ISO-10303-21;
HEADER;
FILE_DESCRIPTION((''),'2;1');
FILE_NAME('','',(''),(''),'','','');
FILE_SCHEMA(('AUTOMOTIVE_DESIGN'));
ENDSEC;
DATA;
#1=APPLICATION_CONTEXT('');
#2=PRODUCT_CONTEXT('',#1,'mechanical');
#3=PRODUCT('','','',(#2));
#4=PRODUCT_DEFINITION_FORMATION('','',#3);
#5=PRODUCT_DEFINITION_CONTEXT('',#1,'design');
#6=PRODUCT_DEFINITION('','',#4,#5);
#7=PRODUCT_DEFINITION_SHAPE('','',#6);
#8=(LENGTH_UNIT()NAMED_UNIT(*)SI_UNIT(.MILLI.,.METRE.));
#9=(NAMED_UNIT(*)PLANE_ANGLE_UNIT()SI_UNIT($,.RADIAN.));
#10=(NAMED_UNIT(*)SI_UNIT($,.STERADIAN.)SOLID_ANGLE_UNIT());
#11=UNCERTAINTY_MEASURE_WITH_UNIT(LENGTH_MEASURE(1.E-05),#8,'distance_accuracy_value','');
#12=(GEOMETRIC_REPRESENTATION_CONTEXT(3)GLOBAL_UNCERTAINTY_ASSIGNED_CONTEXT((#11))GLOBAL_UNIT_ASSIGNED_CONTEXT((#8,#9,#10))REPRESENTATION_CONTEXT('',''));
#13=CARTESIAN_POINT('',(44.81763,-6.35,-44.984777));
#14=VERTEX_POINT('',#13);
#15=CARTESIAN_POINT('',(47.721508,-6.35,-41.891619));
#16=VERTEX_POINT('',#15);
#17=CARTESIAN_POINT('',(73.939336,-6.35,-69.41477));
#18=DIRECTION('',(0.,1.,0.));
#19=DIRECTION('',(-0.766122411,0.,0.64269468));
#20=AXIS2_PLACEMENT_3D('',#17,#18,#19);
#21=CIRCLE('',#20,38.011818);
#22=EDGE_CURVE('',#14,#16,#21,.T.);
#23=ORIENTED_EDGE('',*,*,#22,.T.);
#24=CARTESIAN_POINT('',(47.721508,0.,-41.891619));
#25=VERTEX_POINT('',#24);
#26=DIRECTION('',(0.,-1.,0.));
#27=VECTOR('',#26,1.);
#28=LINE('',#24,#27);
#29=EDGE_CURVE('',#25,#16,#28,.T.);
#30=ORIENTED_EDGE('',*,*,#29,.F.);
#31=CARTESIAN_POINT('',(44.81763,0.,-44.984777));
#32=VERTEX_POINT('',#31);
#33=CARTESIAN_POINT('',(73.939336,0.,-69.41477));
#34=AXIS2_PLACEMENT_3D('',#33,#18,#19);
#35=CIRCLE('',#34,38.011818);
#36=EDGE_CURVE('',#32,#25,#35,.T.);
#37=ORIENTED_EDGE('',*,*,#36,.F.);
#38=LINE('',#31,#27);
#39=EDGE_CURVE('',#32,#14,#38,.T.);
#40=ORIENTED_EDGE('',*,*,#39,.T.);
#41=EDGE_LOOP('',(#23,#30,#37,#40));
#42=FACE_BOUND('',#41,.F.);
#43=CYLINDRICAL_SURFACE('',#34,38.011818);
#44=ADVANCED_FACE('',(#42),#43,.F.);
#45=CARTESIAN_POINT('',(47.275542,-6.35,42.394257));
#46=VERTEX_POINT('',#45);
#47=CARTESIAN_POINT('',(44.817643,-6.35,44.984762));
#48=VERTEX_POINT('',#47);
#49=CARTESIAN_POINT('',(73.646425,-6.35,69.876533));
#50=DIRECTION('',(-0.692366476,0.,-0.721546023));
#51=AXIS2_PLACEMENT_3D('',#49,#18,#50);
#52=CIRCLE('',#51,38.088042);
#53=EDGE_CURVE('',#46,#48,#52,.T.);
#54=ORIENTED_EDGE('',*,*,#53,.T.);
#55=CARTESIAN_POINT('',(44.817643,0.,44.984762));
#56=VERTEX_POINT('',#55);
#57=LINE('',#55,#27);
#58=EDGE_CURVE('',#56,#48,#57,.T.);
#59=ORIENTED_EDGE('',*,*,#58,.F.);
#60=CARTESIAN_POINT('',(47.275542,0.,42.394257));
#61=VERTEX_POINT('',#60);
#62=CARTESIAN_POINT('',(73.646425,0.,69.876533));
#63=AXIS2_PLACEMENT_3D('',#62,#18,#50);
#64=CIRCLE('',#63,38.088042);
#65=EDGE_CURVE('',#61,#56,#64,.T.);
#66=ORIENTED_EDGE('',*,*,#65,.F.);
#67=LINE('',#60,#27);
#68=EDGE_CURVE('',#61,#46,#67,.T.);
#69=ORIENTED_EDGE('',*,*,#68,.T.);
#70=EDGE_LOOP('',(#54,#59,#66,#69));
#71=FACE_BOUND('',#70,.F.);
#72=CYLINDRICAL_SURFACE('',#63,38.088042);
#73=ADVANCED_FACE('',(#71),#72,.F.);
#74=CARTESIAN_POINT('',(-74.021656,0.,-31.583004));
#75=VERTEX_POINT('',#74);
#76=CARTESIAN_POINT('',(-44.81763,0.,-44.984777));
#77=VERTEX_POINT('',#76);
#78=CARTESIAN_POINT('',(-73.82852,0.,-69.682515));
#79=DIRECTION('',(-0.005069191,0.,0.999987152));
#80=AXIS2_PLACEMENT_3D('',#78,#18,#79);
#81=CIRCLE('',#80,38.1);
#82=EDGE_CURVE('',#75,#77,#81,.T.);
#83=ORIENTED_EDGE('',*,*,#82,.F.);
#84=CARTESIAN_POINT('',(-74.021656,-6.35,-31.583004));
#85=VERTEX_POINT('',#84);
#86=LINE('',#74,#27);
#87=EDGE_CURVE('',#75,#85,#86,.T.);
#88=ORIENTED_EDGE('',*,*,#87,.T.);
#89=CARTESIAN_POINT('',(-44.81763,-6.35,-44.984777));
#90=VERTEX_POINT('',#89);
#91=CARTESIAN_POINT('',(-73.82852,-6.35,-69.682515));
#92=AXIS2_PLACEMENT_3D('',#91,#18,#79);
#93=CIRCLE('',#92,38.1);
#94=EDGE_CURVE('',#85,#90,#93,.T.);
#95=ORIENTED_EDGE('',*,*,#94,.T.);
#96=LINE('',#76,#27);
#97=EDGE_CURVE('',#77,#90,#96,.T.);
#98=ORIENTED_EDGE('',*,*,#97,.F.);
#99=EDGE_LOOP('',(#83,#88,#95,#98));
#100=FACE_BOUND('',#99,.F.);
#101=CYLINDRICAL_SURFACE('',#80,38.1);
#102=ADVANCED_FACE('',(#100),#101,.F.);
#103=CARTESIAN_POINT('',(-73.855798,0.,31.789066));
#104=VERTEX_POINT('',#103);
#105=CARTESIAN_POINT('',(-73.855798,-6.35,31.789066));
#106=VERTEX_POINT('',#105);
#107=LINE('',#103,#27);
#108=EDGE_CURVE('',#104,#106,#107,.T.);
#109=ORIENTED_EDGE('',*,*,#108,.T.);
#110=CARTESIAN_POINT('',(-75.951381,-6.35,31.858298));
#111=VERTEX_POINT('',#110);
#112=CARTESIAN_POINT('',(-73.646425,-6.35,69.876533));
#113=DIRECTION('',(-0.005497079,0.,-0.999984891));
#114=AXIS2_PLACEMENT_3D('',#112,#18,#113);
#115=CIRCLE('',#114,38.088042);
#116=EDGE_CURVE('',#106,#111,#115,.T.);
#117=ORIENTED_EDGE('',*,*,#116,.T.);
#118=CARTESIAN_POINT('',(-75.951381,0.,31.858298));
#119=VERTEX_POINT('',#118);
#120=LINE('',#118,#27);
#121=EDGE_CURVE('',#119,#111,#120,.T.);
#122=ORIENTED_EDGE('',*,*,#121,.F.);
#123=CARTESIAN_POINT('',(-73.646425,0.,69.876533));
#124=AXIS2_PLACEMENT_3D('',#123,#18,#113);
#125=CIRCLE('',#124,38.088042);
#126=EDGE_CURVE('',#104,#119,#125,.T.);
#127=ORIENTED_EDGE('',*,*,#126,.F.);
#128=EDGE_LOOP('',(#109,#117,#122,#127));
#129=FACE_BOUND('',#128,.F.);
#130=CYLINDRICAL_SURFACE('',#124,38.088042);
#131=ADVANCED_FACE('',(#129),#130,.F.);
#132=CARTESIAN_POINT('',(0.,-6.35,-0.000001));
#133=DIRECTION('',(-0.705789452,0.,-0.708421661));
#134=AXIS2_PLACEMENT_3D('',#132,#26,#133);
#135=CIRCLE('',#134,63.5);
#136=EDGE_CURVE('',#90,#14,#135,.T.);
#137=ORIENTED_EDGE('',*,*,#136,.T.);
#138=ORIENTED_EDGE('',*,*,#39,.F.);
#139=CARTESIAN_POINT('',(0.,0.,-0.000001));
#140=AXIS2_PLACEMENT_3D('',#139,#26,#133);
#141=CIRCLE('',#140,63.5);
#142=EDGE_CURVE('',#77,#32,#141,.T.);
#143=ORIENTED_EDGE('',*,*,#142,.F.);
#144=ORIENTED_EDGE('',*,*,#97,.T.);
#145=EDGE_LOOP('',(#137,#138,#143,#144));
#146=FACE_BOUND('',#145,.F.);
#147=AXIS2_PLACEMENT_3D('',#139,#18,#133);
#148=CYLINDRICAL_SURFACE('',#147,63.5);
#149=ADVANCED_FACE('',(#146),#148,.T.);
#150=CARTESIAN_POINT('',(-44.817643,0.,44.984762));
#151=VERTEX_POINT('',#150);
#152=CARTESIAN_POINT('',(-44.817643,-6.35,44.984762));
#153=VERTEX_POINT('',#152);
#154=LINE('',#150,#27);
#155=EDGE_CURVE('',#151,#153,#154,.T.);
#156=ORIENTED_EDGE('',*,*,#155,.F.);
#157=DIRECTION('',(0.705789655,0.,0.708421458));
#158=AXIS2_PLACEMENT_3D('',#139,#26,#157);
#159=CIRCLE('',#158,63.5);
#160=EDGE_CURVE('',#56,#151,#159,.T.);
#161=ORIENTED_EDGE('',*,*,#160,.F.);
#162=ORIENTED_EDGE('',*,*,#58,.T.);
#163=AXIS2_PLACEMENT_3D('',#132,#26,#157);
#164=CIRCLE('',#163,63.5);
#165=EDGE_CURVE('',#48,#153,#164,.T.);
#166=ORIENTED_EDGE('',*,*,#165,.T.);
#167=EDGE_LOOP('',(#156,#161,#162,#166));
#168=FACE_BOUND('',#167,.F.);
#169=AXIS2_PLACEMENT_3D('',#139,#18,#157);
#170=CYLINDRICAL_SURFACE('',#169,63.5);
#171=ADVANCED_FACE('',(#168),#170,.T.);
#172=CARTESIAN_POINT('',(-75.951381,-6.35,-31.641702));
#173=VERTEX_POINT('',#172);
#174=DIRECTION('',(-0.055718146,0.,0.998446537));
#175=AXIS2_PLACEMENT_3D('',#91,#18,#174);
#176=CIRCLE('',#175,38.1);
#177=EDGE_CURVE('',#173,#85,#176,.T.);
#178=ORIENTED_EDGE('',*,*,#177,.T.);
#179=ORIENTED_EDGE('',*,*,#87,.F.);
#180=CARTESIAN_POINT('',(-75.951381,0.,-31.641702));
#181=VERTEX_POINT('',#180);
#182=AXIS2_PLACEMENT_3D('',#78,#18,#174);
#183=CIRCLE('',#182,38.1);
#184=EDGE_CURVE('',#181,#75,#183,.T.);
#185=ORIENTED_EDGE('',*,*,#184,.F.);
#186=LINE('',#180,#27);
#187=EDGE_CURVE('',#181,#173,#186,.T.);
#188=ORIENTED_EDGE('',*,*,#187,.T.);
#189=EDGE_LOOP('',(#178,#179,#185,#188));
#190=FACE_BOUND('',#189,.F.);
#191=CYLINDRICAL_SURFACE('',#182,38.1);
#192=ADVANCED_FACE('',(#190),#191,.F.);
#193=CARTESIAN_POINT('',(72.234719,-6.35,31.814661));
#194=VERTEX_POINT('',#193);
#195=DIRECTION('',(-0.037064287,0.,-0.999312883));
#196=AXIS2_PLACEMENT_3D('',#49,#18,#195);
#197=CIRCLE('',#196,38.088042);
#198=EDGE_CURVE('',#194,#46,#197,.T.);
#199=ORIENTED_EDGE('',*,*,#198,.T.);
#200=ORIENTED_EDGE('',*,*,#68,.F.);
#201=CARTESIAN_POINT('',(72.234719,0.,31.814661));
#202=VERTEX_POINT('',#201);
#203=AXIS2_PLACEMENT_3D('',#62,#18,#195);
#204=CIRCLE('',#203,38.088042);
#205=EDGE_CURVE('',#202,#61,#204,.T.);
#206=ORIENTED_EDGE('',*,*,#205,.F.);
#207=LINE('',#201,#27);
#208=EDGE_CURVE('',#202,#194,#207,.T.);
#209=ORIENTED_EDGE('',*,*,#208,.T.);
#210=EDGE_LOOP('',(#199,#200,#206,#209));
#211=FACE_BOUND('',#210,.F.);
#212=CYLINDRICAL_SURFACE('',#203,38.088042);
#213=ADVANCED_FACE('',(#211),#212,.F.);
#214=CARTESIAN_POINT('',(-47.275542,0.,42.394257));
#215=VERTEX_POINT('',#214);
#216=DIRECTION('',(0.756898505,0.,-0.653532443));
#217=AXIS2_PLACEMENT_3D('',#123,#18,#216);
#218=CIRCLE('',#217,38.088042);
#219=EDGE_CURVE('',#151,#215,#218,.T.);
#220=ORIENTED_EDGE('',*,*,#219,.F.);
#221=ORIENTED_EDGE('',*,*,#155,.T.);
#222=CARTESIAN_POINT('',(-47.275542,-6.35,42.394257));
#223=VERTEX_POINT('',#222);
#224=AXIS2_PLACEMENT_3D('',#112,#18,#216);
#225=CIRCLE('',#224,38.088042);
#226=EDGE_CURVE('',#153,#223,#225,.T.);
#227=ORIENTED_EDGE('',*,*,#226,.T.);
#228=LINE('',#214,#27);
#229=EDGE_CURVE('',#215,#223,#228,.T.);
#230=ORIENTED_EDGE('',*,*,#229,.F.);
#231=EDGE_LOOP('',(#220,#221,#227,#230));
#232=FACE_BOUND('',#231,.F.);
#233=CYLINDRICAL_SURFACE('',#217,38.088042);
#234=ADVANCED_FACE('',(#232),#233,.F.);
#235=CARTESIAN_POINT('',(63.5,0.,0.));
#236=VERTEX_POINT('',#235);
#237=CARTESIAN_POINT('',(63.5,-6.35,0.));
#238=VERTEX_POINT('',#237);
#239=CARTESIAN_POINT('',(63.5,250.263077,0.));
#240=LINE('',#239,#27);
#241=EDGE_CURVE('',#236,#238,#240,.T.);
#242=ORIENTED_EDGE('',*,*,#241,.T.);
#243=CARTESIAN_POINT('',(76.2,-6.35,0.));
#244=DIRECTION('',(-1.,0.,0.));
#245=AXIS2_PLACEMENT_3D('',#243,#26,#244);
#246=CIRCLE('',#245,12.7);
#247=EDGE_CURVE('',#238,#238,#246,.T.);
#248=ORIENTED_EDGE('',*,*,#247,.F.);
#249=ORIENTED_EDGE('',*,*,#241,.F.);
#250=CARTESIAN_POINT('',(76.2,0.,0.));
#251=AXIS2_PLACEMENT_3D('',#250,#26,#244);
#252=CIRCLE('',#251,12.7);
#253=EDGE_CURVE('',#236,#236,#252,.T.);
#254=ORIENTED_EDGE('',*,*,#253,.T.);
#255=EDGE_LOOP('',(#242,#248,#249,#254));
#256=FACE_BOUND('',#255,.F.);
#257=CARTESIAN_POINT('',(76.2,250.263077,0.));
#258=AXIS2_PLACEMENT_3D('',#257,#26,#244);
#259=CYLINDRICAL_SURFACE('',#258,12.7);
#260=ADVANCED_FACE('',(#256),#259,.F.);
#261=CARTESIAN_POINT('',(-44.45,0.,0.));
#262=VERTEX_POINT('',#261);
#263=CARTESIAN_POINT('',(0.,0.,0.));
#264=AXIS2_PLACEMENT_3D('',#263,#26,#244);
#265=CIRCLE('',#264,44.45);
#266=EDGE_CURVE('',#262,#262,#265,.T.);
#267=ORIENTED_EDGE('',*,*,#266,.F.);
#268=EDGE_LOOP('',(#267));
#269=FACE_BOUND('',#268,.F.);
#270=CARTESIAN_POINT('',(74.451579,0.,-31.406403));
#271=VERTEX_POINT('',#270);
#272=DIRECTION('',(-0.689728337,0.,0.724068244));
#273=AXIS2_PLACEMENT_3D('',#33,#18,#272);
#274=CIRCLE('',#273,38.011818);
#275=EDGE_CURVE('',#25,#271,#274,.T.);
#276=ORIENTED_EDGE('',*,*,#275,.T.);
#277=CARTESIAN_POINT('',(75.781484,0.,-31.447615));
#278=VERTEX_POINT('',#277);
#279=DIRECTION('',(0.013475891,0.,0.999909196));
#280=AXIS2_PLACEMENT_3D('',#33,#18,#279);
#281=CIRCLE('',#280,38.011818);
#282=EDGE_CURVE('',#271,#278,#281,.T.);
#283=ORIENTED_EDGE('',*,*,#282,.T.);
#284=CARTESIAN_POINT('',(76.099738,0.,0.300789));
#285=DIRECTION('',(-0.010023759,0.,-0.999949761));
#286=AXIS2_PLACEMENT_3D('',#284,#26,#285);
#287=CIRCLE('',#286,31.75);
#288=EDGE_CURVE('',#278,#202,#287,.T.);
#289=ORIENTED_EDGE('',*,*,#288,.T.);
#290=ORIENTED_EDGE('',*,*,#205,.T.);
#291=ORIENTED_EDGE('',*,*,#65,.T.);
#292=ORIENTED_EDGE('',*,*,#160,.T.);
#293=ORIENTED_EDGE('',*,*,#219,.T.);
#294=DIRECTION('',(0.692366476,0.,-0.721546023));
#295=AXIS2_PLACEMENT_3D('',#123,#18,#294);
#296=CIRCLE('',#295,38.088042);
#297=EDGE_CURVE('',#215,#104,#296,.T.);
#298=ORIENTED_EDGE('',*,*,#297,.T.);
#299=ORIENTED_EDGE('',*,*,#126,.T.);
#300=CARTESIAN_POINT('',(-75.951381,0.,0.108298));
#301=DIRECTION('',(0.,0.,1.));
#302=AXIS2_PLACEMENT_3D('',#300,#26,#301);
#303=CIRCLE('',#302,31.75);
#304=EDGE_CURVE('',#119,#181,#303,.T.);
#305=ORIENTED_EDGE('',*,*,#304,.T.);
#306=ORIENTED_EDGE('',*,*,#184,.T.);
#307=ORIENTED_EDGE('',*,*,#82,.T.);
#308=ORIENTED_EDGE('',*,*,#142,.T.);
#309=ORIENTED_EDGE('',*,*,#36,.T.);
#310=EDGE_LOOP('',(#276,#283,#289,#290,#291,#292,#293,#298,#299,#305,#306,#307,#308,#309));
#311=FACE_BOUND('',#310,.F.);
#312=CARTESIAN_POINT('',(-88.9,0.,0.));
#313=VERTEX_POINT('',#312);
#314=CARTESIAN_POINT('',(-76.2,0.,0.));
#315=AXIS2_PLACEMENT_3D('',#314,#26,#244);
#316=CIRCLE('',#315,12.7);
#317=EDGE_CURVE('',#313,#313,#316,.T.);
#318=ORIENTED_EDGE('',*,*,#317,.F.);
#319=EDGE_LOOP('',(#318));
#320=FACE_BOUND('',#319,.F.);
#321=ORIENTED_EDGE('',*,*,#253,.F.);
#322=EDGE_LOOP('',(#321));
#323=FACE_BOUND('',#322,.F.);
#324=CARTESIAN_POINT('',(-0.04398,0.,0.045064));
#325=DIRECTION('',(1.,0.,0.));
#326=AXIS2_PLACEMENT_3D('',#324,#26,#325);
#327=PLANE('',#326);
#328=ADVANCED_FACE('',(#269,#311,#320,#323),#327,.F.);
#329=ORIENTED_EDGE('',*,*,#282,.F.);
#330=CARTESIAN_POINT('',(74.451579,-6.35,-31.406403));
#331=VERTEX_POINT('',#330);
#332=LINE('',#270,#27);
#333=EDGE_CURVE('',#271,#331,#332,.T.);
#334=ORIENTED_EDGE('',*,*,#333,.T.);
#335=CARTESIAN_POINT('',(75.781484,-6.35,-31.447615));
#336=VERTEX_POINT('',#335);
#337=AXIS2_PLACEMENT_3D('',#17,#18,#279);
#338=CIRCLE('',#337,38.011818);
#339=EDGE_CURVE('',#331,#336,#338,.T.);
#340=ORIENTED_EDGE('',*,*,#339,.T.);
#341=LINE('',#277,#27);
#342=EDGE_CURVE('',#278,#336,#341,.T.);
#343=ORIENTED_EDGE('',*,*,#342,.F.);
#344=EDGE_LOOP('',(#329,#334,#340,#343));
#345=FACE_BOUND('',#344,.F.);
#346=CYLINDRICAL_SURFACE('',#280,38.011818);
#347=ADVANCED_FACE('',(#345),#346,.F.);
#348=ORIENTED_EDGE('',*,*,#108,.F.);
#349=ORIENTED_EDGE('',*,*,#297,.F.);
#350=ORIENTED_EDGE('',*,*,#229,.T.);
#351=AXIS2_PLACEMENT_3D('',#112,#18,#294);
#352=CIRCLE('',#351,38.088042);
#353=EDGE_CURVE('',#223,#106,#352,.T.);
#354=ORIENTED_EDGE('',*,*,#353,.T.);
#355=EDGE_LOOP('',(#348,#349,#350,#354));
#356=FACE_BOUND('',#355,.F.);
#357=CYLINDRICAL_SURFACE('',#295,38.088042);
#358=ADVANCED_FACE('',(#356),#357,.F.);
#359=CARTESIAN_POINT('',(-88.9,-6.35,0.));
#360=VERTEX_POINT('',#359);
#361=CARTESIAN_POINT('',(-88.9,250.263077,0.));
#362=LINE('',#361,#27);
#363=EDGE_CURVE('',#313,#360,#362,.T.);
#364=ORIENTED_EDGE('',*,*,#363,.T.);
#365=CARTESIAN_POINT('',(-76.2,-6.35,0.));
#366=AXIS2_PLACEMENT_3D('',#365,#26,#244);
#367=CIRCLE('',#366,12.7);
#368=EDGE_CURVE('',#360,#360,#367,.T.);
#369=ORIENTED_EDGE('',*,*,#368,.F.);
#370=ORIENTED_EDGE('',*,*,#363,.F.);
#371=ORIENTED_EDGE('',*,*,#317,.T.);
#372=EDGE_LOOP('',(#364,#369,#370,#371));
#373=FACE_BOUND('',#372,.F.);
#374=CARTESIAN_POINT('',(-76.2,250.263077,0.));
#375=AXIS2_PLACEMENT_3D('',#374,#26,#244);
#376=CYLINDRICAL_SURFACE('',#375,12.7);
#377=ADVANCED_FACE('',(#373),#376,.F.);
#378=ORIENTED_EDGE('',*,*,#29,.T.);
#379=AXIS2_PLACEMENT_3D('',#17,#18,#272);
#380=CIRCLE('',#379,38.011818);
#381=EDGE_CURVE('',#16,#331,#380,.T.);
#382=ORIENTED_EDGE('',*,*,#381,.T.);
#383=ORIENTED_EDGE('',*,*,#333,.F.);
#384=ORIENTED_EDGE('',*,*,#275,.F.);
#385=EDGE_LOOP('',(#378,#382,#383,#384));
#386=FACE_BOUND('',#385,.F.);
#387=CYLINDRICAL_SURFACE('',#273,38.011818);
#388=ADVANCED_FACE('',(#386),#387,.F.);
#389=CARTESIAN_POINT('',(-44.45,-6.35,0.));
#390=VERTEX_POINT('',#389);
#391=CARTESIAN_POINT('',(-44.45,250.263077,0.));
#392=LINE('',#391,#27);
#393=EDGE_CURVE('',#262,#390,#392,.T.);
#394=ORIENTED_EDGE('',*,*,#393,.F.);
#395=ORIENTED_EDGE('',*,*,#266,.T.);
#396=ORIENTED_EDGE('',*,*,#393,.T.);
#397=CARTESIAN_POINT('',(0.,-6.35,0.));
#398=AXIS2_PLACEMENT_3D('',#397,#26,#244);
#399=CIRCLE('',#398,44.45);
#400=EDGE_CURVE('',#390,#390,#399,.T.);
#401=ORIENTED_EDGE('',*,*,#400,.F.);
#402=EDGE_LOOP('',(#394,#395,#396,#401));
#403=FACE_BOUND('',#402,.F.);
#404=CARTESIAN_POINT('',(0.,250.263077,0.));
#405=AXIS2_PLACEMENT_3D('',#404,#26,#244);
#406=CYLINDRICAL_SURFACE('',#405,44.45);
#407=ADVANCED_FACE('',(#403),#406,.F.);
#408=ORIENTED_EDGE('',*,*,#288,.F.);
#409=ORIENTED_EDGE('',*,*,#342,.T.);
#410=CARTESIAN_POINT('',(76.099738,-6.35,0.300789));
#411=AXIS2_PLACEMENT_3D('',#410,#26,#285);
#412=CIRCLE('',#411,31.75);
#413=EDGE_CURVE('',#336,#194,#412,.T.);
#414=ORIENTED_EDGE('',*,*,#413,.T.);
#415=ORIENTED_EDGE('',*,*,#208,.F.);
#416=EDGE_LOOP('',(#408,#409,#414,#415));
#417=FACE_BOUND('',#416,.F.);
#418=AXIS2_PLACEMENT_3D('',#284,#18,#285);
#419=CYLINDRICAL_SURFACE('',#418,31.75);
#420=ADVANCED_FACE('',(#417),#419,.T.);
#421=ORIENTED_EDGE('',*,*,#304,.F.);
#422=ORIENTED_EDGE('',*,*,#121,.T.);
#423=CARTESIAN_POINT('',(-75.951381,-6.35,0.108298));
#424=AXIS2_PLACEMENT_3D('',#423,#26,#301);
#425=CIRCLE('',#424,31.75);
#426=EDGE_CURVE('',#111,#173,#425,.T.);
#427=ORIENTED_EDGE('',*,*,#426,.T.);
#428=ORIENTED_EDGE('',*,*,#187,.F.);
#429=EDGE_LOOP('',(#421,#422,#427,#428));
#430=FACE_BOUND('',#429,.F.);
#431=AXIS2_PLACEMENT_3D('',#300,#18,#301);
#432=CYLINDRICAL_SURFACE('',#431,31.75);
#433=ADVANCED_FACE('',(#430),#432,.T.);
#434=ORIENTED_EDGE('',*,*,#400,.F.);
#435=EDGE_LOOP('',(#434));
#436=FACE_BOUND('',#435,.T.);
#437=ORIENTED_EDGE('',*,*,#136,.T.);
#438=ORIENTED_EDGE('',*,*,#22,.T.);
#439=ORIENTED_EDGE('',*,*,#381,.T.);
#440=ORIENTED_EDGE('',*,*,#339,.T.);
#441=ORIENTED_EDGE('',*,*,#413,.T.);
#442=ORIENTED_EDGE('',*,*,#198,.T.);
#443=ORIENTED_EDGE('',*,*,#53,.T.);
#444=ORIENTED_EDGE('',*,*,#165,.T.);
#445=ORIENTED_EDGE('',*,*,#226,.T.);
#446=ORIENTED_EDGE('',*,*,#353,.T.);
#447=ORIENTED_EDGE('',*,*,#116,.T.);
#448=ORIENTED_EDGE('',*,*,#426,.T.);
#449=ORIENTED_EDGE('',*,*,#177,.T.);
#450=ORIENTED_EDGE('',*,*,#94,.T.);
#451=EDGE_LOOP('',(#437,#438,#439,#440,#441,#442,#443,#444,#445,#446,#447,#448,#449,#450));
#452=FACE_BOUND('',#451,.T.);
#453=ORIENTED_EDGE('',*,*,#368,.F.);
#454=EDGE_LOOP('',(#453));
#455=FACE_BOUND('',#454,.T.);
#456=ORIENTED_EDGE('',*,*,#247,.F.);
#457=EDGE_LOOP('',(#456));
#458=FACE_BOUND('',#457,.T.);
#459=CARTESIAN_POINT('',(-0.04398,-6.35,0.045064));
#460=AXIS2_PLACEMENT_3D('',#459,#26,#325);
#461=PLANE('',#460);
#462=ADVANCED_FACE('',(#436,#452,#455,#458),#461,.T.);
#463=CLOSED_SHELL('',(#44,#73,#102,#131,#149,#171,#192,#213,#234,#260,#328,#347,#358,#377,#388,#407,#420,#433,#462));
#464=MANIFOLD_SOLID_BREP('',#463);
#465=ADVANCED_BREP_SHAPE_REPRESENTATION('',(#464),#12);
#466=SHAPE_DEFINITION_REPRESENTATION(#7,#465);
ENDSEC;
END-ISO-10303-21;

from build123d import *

# Parameters (mm, degrees)
F2_DEPTH = 6.35
F3_D     = 25.4
F4_D     = 88.9


# Not quite as in the source:
# - a length typed as a fraction of an inch, garbled in the dataset ("3 / 203.2 mm" for 3/8 in), is restored


with BuildPart() as f2:
    # F1 (on Front) → F2 (new body)
    with BuildSketch(Plane.XZ):
        with BuildLine():
            ThreePointArc((-47.2755417472, 42.3942574403), (-59.5317634989, 34.5003362533), (-73.8557984397, 31.7890660068))
            ThreePointArc((-73.8557984397, 31.7890660068), (-74.9040664455, 31.8092594153), (-75.9513814682, 31.8582984692))
            ThreePointArc((-75.9513814682, 31.8582984692), (-107.7013814682, 0.1082984692), (-75.9513814682, -31.6417015308))
            ThreePointArc((-75.9513814682, -31.6417015308), (-74.9868907208, -31.6001278987), (-74.0216562697, -31.5830041335))
            ThreePointArc((-74.0216562697, -31.5830041335), (-59.7325831056, -34.2859814401), (-47.4971337693, -42.1458464357))
            ThreePointArc((-47.4971337693, -42.1458464357), (-46.1209982776, -43.530970971), (-44.8176302016, -44.9847765041))
            ThreePointArc((-44.8176302016, -44.9847765041), (0, -63.5000010449), (44.8176302016, -44.9847765041))
            ThreePointArc((44.8176302016, -44.9847765041), (46.2263803756, -43.3976521369), (47.7215078569, -41.8916193935))
            ThreePointArc((47.7215078569, -41.8916193935), (60.0584421445, -34.0280617532), (74.4515791566, -31.4064032457))
            ThreePointArc((74.4515791566, -31.4064032457), (75.1167119815, -31.4211899869), (75.7814841371, -31.4476154228))
            ThreePointArc((75.7814841371, -31.4476154228), (107.7999571445, 2.0780448238), (72.2347193484, 31.814661464))
            ThreePointArc((72.2347193484, 31.814661464), (58.7820372427, 34.8087566031), (47.2755417472, 42.3942574403))
            ThreePointArc((47.2755417472, 42.3942574403), (46.0162162459, 43.6606882414), (44.8176431113, 44.9847615526))
            ThreePointArc((44.8176431113, 44.9847615526), (0, 63.4999989551), (-44.8176431113, 44.9847615526))
            ThreePointArc((-44.8176431113, 44.9847615526), (-46.0162162459, 43.6606882414), (-47.2755417472, 42.3942574403))
        make_face()
    extrude(amount=F2_DEPTH)

    # F3 (through all)
    with Locations(Plane(origin=(0, 0, 0), x_dir=(1, 0, 0), z_dir=(0, 1, 0))):
        with Locations((-76.2, 0), (76.2, 0)):
            Hole(F3_D / 2)

    # F4 (through all)
    with Locations(Plane(origin=(0, 0, 0), x_dir=(1, 0, 0), z_dir=(0, 1, 0))):
        with Locations((0, 0)):
            Hole(F4_D / 2)


solid = f2.part
